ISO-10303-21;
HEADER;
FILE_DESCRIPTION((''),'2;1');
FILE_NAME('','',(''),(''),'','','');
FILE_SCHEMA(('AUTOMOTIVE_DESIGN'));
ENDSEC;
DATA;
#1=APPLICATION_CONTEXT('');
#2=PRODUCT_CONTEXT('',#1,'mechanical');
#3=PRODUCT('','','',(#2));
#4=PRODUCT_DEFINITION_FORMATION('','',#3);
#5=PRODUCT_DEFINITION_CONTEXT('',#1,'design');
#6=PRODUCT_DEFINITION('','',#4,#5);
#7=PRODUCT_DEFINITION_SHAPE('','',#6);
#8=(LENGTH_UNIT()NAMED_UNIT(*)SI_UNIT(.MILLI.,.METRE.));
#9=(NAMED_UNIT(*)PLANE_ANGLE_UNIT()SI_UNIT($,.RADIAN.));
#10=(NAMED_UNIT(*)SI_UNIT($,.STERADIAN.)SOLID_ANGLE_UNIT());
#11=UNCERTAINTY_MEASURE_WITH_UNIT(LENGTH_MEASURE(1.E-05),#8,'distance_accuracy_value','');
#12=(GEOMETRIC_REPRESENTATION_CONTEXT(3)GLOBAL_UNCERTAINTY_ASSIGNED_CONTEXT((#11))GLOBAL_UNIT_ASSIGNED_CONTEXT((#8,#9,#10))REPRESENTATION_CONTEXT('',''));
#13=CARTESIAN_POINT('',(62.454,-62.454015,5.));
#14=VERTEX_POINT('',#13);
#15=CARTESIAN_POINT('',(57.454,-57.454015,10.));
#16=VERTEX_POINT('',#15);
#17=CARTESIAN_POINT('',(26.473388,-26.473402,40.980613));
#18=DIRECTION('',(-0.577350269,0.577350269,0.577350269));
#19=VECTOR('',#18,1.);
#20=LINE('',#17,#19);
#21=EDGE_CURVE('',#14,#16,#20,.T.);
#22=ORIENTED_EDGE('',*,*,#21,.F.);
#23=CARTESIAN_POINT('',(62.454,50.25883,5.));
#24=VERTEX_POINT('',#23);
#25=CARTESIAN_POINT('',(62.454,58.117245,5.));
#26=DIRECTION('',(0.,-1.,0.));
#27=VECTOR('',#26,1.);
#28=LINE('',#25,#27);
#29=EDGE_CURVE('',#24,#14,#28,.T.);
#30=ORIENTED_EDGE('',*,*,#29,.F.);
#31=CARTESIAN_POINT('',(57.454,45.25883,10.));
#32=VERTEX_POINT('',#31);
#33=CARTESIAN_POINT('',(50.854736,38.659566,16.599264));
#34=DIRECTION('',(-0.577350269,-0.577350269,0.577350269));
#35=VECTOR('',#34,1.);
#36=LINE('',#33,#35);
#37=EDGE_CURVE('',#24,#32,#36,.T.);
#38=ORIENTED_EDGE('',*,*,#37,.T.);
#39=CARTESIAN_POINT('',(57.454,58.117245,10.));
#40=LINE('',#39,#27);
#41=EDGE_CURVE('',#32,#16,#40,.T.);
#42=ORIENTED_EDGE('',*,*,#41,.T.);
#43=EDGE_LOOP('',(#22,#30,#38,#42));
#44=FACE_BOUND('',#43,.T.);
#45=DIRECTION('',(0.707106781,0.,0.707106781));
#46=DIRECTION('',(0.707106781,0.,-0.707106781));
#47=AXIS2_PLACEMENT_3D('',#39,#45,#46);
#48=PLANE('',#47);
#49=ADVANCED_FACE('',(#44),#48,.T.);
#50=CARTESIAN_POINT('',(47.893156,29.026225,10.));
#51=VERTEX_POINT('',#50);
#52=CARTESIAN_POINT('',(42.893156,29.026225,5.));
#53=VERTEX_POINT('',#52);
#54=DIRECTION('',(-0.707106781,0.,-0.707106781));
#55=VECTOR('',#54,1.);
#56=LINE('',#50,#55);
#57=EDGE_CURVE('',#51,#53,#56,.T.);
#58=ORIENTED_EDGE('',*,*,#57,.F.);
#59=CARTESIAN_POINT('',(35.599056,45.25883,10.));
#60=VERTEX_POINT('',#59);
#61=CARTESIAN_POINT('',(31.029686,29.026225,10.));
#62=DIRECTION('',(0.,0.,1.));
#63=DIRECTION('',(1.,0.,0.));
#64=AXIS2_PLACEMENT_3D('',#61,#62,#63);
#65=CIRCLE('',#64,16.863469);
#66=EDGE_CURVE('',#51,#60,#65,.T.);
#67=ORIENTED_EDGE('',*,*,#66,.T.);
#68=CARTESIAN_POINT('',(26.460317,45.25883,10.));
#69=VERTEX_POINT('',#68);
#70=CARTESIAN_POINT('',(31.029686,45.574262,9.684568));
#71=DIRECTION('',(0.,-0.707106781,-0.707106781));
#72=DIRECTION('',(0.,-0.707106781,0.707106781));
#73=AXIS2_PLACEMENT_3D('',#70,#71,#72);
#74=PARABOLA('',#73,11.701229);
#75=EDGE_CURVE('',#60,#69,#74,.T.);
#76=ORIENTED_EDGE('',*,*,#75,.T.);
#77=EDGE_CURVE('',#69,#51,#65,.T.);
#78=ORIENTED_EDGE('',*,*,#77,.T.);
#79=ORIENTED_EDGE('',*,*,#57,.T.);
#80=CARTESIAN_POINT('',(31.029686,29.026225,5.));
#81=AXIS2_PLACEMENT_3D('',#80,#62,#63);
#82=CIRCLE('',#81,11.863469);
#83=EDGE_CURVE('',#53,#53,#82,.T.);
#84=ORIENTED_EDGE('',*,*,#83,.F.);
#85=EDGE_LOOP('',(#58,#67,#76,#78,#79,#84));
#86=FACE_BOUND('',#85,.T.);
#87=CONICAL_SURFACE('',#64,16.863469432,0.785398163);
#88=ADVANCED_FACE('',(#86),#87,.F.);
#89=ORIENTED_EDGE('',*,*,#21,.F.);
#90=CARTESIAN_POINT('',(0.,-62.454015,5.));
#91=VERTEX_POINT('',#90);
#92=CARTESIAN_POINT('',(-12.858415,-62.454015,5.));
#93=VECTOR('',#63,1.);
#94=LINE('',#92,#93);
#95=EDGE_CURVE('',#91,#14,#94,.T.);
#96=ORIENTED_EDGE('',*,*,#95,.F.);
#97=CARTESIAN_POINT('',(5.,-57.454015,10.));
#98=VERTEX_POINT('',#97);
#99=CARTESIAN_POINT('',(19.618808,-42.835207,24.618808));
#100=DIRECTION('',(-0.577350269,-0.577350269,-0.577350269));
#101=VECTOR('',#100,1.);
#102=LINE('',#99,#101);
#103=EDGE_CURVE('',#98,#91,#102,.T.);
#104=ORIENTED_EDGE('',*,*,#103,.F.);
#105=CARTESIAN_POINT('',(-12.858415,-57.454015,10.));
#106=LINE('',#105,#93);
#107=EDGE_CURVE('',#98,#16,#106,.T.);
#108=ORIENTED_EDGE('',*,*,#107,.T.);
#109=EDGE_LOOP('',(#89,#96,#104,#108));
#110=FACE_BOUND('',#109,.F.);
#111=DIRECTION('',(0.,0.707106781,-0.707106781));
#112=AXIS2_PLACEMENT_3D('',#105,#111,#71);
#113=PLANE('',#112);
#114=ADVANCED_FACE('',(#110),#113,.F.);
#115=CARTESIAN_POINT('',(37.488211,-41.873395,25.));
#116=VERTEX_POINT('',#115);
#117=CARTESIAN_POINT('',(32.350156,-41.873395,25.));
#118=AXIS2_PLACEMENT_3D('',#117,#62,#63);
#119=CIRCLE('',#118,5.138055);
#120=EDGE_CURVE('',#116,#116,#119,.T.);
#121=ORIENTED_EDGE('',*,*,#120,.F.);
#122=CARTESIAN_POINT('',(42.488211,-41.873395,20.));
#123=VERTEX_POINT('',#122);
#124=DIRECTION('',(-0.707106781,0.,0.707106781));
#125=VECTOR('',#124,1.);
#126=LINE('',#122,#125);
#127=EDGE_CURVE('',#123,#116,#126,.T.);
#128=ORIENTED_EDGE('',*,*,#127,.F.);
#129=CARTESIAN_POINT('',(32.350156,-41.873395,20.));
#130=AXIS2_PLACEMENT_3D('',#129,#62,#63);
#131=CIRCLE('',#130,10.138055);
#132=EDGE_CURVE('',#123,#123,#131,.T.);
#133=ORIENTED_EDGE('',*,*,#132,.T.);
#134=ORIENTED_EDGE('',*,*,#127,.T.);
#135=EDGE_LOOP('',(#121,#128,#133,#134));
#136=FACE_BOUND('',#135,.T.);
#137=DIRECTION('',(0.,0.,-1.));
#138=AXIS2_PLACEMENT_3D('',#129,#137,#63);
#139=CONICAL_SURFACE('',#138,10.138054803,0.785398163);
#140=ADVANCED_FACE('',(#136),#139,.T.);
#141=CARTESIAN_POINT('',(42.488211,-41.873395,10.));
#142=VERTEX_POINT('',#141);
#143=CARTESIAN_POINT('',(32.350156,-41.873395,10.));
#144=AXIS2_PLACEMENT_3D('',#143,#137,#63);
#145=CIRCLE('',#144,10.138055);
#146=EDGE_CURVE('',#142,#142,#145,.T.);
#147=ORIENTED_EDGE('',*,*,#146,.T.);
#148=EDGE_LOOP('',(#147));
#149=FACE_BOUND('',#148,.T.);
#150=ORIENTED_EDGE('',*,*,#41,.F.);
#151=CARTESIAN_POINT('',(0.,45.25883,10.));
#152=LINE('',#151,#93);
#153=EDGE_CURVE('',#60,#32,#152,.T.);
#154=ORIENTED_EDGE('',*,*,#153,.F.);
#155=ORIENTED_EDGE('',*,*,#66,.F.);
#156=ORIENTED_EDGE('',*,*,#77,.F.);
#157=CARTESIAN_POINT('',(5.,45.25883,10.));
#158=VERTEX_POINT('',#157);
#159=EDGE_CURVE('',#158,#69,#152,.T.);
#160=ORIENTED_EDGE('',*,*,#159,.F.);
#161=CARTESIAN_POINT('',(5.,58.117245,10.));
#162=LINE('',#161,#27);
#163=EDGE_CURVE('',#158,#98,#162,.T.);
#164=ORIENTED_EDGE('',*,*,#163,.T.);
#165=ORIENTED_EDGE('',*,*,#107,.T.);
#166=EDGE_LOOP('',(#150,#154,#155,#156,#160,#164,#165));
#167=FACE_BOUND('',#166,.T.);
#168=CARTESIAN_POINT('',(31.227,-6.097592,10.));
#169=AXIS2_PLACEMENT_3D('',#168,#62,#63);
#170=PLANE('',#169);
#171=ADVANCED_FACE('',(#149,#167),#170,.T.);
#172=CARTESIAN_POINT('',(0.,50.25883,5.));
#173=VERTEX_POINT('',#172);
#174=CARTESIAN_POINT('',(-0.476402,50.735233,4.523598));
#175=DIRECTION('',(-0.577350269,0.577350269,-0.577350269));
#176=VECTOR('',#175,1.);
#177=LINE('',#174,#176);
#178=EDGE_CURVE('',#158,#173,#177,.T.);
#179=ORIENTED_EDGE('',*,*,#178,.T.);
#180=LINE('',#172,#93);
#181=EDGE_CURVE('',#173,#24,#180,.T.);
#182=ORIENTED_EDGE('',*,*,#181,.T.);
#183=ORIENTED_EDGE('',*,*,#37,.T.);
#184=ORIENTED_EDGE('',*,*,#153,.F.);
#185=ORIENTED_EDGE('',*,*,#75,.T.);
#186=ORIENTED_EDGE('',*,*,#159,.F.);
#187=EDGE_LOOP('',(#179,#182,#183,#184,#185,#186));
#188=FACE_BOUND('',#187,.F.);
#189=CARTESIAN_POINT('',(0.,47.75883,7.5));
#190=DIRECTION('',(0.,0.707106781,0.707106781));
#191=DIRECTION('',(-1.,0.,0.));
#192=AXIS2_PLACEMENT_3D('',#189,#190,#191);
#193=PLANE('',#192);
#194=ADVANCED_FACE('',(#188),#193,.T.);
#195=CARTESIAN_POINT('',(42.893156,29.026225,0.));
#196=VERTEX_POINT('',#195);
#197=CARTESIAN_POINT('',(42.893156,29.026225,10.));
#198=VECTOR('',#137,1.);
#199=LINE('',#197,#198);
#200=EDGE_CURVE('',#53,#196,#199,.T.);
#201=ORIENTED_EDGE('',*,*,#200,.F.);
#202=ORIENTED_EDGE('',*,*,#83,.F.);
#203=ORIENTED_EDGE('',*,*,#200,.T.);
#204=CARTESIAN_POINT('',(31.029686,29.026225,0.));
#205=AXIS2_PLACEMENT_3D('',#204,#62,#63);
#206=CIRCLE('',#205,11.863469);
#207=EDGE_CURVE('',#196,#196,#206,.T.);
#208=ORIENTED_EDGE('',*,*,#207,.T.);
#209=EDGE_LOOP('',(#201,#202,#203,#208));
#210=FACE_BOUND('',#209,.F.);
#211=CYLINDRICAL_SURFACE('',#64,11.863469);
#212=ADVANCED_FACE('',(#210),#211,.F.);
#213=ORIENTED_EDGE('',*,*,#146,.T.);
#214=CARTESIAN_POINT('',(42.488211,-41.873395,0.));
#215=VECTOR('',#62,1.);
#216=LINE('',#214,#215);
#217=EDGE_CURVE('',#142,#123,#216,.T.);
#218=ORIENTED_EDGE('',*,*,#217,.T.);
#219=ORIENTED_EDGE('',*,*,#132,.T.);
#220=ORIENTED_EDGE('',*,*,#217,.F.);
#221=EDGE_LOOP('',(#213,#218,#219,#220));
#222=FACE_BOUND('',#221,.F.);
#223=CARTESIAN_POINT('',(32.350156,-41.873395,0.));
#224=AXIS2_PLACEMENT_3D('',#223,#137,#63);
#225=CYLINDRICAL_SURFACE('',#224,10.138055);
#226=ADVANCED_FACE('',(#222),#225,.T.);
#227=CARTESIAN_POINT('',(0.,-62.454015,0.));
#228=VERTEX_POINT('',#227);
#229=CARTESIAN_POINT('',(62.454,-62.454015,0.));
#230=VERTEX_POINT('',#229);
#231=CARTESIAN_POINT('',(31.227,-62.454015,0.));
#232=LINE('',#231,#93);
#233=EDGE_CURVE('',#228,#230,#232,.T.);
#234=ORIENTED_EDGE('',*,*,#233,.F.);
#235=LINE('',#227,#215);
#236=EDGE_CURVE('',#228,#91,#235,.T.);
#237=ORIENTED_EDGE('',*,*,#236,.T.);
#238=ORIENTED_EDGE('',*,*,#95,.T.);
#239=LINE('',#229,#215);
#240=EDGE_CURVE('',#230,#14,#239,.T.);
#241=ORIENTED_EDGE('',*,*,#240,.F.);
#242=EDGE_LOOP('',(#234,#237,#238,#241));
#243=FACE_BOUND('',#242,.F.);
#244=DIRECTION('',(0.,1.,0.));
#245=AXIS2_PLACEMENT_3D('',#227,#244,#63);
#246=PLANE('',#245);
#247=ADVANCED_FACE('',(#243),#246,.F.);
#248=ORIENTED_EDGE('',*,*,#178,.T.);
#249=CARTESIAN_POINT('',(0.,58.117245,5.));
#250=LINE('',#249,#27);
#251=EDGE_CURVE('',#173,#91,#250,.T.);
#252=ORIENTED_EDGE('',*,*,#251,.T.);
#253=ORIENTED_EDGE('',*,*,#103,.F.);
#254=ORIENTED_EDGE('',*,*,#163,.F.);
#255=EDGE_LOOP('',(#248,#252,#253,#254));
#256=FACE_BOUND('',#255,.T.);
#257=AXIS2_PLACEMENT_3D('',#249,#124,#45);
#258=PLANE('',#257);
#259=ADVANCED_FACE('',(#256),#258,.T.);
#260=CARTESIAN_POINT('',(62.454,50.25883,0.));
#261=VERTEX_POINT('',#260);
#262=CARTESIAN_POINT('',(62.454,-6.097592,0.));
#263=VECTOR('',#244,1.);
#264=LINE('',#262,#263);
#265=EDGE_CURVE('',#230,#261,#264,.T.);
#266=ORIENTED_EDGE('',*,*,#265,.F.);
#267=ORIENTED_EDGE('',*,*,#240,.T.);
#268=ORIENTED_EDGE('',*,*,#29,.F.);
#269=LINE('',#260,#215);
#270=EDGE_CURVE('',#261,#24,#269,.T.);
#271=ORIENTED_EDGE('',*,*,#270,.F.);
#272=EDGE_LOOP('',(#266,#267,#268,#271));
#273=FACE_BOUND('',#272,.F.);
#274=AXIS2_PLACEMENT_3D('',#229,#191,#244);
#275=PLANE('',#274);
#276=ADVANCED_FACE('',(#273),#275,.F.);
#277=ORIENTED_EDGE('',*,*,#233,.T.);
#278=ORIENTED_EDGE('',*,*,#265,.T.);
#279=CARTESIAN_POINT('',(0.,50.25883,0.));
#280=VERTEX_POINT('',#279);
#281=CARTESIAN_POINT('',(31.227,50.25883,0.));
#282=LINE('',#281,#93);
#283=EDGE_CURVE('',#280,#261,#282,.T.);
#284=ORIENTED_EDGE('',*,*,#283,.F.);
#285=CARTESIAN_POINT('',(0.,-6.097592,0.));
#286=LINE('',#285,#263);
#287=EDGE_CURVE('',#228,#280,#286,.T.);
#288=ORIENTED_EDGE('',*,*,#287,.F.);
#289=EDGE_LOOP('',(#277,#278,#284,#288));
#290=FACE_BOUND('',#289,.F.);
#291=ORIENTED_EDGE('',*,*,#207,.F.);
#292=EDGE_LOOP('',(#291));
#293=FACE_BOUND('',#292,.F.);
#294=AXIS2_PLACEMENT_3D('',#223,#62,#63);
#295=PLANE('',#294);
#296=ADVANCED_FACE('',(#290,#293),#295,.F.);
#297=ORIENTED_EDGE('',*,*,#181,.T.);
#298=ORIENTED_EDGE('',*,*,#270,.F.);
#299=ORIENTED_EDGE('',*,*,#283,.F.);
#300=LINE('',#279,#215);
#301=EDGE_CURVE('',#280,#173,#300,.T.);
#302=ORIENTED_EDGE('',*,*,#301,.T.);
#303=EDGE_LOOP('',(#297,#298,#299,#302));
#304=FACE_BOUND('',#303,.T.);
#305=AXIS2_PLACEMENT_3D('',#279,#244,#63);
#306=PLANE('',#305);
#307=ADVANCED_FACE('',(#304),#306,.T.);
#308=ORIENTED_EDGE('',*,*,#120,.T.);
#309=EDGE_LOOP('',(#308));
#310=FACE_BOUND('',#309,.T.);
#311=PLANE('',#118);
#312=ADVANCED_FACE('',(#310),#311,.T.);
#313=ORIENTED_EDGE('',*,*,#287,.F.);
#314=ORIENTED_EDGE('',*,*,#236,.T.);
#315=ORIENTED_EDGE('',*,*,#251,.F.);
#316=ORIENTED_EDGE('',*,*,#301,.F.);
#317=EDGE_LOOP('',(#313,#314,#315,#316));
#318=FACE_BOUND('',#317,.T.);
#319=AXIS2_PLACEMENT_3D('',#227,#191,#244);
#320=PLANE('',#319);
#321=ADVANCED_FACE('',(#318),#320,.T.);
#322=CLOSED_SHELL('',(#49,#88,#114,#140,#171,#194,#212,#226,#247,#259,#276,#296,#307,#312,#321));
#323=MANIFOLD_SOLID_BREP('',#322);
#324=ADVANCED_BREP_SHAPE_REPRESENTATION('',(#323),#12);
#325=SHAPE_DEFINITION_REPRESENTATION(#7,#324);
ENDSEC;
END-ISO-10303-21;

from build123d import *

# Parameters (mm, degrees)
F0_W         = 62.4540001154
F0_H         = 112.7128452063
F1_DEPTH     = 10
F3_R         = 11.8634694321
F4_DEPTH     = 25
F6_R         = 10.1380548027
F7_DEPTH     = 25
F9_SIZE      = 5
F10_T1_DEPTH = 133.4296750859
F10_T3_DEPTH = 88.1708299951


# Not quite as in the source:
# - a fillet or chamfer that OpenCascade refuses, or shapes differently, is made with other operations: its cross-section is extruded or revolved along the edge and cut away or added


with BuildPart() as f1:
    # F0 (on Top) → F1 (new body)
    with BuildSketch(Plane.XY):
        with Locations((31.2270000577, -6.0975924134)):
            Rectangle(F0_W, F0_H)
    extrude(amount=F1_DEPTH)

    # F3 (on face) → F4 (cut)
    with BuildSketch(Plane.XY.offset(10)):
        with Locations((31.0296863317, 29.0262252092)):
            Circle(F3_R)
    extrude(amount=-F4_DEPTH, mode=Mode.SUBTRACT)

    # F6 (on Top) → F7 (join)
    with BuildSketch(Plane.XY):
        with Locations((32.3501564562, -41.873395443)):
            Circle(F6_R)
    extrude(amount=F7_DEPTH)

    # F9
    f9_edges = [f1.edges().sort_by_distance(p)[0] for p in [
        (31.227, 50.25883, 10),
    ]]
    chamfer(f9_edges, length=F9_SIZE)

    # F10: chamfer of 5 on 5 edges, made by hand

    # F10_s2 → F10_t1 (cut)
    with BuildSketch(Plane.XZ.offset(-58.1172451295)):
        Polygon((57.4540001154, 10), (62.4540001154, 5), (62.4540001154, 10), align=None)
        Polygon((0, 5), (5, 10), (0, 10), align=None)
    extrude(amount=F10_T1_DEPTH, mode=Mode.SUBTRACT)

    # F10_s4 → F10_t3 (cut)
    with BuildSketch(Plane.YZ.offset(-12.8584149398)):
        Polygon((-57.4540150166, 10), (-62.4540150166, 5), (-62.4540150166, 10), align=None)
    extrude(amount=F10_T3_DEPTH, mode=Mode.SUBTRACT)

    # F10_s5 → F10_t6 (revolve, cut)
    with BuildSketch(Plane.XZ.offset(41.873395443)):
        Polygon((42.488211259, 20), (37.488211259, 25), (42.488211259, 25), align=None)
    revolve(axis=Axis((32.3501564562, -41.873395443, 25), (0, 0, 1)), mode=Mode.SUBTRACT)

    # F10_s7 → F10_t8 (revolve, cut)
    with BuildSketch(Plane.XZ.offset(-29.0262252092)):
        Polygon((47.8931557638, 10), (42.8931557638, 5), (42.8931557638, 10), align=None)
    revolve(axis=Axis((31.0296863317, 29.0262252092, 10), (0, 0, 1)), mode=Mode.SUBTRACT)


solid = f1.part
